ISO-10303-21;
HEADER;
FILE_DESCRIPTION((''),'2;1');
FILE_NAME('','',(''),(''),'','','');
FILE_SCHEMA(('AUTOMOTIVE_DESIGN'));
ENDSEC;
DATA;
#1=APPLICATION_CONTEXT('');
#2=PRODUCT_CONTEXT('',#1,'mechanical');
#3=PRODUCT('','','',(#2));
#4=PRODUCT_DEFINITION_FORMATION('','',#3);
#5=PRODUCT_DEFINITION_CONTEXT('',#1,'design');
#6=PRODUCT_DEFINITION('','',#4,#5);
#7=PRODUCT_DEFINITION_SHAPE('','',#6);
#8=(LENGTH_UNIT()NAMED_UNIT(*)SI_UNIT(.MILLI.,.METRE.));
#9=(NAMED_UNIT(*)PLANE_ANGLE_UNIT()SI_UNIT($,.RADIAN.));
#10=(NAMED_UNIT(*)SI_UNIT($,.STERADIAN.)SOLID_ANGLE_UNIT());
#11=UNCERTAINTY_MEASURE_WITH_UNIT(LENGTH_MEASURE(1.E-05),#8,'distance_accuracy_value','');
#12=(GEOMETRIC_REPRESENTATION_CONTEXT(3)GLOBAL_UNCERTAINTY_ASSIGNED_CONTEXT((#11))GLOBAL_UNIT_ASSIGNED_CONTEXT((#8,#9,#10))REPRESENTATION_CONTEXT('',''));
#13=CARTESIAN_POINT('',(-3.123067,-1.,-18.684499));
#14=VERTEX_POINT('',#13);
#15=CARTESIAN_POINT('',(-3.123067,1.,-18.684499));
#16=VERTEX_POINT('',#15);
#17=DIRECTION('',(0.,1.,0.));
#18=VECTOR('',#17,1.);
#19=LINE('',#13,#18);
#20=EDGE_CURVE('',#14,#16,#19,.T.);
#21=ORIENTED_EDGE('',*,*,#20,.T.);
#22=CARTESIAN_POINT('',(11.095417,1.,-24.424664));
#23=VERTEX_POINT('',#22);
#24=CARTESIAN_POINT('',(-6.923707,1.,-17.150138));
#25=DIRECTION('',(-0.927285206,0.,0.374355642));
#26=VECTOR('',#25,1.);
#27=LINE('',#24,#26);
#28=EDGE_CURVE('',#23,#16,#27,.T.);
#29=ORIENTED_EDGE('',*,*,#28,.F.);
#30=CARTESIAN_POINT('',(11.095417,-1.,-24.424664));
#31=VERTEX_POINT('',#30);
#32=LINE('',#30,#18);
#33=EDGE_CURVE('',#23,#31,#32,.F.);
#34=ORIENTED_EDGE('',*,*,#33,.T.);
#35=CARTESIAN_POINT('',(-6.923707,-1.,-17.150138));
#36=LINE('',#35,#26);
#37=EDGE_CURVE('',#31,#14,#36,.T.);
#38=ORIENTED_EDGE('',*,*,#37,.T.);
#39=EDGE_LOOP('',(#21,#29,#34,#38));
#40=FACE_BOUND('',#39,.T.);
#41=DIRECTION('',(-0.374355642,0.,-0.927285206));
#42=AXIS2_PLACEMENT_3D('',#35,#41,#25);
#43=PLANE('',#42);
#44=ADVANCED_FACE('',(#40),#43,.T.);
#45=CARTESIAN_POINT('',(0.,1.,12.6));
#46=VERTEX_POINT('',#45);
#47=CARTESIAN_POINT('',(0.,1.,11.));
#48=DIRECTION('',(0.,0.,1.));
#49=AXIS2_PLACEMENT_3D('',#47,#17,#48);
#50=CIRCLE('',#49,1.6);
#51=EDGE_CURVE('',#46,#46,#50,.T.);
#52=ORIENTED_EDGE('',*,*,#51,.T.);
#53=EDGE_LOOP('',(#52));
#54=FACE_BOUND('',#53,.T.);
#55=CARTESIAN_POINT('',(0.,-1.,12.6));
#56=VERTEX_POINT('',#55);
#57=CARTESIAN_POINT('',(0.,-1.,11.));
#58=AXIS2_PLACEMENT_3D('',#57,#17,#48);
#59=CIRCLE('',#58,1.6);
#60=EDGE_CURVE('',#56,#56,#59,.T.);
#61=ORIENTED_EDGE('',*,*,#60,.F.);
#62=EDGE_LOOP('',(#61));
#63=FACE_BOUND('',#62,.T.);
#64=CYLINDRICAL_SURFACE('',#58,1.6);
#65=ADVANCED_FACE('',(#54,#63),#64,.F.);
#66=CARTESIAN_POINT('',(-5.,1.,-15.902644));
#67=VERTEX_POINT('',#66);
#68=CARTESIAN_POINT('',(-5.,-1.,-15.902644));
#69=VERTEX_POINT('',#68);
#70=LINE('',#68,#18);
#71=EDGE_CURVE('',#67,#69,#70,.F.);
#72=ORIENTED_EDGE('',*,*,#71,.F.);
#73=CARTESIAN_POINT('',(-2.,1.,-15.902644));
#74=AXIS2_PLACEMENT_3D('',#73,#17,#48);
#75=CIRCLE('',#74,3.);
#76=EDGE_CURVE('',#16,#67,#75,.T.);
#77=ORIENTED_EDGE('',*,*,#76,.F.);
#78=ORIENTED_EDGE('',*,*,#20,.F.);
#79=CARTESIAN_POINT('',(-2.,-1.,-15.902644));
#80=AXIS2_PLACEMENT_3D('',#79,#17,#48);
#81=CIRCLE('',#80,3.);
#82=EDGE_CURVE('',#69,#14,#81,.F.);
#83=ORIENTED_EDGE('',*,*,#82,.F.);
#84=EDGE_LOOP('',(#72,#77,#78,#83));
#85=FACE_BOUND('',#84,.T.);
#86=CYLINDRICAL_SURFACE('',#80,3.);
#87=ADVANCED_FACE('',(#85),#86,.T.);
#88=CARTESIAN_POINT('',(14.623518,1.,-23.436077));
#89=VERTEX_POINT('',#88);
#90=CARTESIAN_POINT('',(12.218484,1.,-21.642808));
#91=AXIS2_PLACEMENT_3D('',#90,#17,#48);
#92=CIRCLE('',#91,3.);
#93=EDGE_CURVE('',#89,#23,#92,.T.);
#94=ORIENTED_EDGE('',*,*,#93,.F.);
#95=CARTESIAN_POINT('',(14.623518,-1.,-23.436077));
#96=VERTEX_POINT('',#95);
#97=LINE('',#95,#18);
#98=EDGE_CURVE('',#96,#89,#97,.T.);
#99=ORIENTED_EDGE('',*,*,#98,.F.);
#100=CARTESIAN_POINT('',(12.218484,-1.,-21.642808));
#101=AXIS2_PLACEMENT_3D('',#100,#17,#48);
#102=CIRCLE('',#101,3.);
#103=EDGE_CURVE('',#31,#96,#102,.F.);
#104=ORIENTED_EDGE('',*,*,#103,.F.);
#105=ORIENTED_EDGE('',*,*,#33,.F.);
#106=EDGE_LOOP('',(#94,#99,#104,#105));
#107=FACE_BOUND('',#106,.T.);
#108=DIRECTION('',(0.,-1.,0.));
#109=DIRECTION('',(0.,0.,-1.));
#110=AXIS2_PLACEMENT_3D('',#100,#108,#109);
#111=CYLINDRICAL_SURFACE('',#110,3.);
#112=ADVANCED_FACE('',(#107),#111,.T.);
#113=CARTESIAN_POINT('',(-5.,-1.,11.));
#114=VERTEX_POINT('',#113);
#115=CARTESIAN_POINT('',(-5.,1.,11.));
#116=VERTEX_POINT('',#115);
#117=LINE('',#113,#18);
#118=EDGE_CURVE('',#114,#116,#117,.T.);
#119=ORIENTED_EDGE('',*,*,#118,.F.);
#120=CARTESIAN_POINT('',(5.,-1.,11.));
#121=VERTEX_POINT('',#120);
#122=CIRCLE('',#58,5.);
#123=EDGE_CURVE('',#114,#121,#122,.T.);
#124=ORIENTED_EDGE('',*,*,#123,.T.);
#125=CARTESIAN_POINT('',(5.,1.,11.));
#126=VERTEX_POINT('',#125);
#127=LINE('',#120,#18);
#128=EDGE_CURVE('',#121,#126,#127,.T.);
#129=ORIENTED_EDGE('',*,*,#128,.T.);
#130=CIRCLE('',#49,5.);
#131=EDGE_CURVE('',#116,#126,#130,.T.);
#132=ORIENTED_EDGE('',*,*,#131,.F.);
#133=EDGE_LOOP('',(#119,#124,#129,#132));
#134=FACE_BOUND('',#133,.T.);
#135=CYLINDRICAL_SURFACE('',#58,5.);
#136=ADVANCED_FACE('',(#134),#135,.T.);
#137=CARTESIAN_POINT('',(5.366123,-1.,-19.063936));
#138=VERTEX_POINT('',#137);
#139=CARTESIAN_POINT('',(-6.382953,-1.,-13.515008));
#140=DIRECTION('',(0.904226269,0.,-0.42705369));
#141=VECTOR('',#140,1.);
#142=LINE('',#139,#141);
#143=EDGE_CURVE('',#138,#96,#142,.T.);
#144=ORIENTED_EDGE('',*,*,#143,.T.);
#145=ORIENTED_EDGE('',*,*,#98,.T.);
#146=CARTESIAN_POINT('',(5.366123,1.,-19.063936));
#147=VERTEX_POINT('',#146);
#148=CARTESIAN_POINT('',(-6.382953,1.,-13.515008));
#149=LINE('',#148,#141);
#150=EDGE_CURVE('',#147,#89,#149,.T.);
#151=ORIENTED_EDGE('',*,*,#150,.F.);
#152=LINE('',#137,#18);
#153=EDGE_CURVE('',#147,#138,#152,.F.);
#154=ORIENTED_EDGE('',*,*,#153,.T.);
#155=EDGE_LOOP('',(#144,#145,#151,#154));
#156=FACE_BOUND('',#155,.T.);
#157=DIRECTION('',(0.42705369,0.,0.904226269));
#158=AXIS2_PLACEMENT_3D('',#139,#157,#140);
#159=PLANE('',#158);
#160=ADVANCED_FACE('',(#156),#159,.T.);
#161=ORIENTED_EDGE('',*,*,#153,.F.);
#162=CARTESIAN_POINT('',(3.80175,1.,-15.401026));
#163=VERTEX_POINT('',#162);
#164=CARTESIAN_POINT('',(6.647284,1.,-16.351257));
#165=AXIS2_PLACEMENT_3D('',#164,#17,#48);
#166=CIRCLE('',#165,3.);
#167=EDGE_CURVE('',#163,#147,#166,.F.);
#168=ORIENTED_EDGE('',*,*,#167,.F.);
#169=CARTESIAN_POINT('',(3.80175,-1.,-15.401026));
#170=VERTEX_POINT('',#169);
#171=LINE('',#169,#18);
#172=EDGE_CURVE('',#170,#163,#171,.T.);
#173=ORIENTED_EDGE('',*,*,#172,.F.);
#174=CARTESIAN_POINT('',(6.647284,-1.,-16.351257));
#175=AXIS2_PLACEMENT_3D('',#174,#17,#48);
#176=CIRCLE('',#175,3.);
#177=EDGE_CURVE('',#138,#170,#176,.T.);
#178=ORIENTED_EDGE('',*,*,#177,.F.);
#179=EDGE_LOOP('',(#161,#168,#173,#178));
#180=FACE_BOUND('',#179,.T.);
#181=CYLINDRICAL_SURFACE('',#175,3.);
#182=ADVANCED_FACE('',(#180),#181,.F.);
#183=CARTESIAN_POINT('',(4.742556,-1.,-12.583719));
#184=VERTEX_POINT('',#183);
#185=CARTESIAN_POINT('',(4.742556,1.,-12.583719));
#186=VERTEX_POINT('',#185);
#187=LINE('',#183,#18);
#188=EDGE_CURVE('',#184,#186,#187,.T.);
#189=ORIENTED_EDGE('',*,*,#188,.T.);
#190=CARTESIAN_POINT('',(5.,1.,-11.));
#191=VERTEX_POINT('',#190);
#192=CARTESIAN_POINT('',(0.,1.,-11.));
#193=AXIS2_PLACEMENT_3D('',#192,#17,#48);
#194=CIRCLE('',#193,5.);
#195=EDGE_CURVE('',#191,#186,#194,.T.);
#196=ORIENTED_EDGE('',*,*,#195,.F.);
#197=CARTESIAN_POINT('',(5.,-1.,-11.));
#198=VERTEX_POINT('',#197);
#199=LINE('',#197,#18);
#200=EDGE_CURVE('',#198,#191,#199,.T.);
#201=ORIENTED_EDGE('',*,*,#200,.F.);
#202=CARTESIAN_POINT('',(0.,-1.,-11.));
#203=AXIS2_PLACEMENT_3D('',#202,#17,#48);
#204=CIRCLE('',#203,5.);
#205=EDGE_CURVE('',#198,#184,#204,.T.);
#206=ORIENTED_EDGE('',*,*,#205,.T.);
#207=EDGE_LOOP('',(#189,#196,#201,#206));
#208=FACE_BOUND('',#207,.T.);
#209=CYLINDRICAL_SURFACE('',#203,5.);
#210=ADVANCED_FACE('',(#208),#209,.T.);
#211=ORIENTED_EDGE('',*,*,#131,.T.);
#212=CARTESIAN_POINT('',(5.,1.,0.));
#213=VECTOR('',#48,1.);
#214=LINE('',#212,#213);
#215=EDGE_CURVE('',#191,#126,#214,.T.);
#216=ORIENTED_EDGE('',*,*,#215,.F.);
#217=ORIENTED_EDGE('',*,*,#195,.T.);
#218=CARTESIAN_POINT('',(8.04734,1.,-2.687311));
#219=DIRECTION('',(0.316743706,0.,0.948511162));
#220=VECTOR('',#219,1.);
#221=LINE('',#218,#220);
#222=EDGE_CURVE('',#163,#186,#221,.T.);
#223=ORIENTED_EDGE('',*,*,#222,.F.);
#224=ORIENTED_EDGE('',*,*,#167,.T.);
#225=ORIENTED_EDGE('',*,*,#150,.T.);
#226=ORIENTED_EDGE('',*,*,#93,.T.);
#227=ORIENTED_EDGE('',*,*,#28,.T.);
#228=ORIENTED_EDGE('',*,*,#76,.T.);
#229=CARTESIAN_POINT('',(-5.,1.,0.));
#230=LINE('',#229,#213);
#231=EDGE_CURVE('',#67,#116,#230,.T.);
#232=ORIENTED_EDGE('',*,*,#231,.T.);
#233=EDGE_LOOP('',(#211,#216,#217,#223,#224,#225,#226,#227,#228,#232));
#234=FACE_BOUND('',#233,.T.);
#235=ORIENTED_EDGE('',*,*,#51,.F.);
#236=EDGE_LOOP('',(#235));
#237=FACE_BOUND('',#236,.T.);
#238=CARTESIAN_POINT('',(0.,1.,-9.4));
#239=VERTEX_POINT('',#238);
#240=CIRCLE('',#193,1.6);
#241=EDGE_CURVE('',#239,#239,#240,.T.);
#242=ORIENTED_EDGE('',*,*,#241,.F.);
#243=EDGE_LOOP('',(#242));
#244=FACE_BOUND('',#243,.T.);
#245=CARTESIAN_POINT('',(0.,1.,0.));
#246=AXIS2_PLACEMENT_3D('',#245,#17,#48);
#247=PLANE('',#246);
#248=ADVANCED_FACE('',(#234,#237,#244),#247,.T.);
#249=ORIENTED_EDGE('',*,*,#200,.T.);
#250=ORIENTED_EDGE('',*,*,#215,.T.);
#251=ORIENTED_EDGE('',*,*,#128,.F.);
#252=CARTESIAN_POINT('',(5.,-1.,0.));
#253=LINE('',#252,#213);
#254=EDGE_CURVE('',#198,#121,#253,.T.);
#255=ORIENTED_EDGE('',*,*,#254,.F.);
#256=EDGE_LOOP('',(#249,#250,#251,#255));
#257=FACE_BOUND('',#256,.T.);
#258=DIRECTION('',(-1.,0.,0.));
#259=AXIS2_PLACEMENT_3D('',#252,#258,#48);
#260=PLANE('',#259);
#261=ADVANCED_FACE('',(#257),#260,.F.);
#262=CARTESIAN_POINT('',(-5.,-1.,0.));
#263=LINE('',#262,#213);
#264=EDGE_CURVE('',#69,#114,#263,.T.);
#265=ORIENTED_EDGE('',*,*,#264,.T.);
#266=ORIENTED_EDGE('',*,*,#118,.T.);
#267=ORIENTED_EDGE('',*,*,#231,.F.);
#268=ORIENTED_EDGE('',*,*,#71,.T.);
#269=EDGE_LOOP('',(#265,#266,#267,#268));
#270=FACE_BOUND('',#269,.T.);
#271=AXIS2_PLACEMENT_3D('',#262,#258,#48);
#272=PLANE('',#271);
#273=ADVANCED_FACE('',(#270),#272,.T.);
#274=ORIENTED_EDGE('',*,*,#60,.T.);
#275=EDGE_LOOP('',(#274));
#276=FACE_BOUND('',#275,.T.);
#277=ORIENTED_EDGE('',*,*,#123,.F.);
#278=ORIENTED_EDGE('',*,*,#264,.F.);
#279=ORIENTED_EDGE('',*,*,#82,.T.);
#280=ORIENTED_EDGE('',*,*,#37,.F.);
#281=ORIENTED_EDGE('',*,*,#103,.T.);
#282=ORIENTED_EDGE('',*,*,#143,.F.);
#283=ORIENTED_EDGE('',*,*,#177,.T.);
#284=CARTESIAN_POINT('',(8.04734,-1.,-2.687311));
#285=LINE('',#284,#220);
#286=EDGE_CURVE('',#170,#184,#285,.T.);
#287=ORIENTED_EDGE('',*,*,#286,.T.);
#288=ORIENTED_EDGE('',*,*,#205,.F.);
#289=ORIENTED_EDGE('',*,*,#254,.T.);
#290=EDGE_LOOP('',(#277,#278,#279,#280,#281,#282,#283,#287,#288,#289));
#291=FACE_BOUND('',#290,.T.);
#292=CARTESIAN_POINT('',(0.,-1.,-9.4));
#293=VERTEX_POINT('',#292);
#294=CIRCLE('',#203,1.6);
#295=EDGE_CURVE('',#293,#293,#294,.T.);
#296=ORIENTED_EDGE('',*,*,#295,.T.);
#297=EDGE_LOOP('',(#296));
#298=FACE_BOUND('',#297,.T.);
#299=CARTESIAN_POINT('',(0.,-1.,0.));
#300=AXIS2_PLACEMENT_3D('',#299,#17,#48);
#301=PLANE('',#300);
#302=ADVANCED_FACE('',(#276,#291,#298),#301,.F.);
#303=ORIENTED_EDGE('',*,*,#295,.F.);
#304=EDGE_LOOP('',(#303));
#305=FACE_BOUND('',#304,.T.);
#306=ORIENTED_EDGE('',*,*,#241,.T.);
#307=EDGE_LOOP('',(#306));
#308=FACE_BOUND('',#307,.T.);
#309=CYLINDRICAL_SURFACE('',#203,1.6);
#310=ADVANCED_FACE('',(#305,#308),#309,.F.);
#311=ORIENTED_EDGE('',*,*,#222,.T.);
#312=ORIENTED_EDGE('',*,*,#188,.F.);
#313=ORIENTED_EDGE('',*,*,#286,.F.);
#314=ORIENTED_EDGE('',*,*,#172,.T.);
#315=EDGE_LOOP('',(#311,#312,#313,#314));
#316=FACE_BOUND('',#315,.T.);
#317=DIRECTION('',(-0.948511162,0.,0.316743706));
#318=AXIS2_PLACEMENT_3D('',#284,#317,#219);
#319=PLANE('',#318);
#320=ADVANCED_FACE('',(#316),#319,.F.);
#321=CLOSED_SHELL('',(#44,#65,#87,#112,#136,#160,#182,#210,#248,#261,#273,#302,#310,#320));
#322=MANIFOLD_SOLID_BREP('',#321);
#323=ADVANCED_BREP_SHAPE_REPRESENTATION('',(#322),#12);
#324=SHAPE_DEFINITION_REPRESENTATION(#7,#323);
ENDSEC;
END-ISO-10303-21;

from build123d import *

# Parameters (mm, degrees)
BOSS_EXTRUDE1_DEPTH      = 1
BOSS_EXTRUDE1_DEPTH_BACK = 1
SKETCH1_R                = 1.6
BOSS_EXTRUDE4_START      = -2
BOSS_EXTRUDE4_DEPTH      = 2
FILLET1_R                = 3


with BuildPart() as part:
    # Sketch1 → Boss-Extrude1 (new, two sides: drawn at the far end of the back side and taken through both)
    with BuildSketch(Plane(origin=(0, 0, 0), x_dir=(1, 0, 0), z_dir=(0, 1, 0)).offset(-BOSS_EXTRUDE1_DEPTH_BACK)):
        with BuildLine():
            ThreePointArc((5, 11), (0, 16), (-5, 11))
            Line((-5, 11), (-5, -11))
            ThreePointArc((-5, -11), (0, -16), (5, -11))
            Line((5, -11), (5, 11))
        make_face()
        with Locations(Location((0, 11, 0), (0, 0, 270))):
            Circle(SKETCH1_R, mode=Mode.SUBTRACT)
        with Locations(Location((0, -11, 0), (0, 0, 270))):
            Circle(SKETCH1_R, mode=Mode.SUBTRACT)
    extrude(amount=BOSS_EXTRUDE1_DEPTH + BOSS_EXTRUDE1_DEPTH_BACK)

    # Sketch4 → Boss-Extrude4 (add)
    with BuildSketch(Plane(origin=(0, 1, 0), x_dir=(1, 0, 0), z_dir=(0, 1, 0)).offset(BOSS_EXTRUDE4_START)):
        with BuildLine():
            Line((2.958312472, 17.926759894), (-2.135268449, 15.521131346))
            ThreePointArc((-2.135268449, 15.521131346), (1.963819075, 15.59819689), (4.742555811, 12.58371853))
            Line((4.742555811, 12.58371853), (2.958312472, 17.926759894))
        make_face()
        with BuildLine():
            ThreePointArc((-5, 11), (-4.223525911, 13.676159352), (-2.135268449, 15.521131346))
            Line((-2.135268449, 15.521131346), (2.958312472, 17.926759894))
            Line((2.958312472, 17.926759894), (14.623518216, 23.436076894))
            Line((14.623518216, 23.436076894), (13.666416412, 25.462605676))
            Line((13.666416412, 25.462605676), (-5, 17.926759894))
            Line((-5, 17.926759894), (-5, 11))
        make_face()
    extrude(amount=BOSS_EXTRUDE4_DEPTH)

    # Fillet1
    # the kernel refuses this fillet: 3 mm, written as the material it adds along each edge
    with BuildSketch(Plane(origin=(2.958312472, -1, -17.926759894), x_dir=(0.9042262692177064, 0, -0.42705368989932413), z_dir=(0, 1, 0))) as fillet1_piece_1:
        with BuildLine():
            CenterArc((FILLET1_R * 0.887613530768, -FILLET1_R), FILLET1_R, 90, 83.185387179)
            Line((-FILLET1_R * 0.105321747078, -FILLET1_R * 0.881342787793), (0, 0))
            Line((0, 0), (FILLET1_R * 0.887613530768, 0))
        make_face()
    extrude(amount=2)
    # the kernel refuses this fillet: 3 mm, written as the material it takes off along each edge
    with BuildSketch(Plane(origin=(13.666416412, -7.931521676, -25.462605676), x_dir=(0.42705368989932463, 0, 0.904226269217706), z_dir=(0, 1, 0))) as fillet1_2_piece_1:
        with BuildLine():
            CenterArc((2.835616342, -2.940516757), FILLET1_R, 101.428639538, 75.275128979)
            Line((-0.159420459, -2.768021668), (0, 0))
            Line((0, 0), (2.241174417, 0))
        make_face()
    extrude(amount=15.863043352, mode=Mode.SUBTRACT)
    with BuildSketch(Plane(origin=(-5, -6.060290677, -17.926759894), x_dir=(0, 0, 1), z_dir=(0, 1, 0))) as fillet1_2_piece_2:
        with BuildLine():
            CenterArc((FILLET1_R * 0.674705423588, FILLET1_R), FILLET1_R, 201.984493206, 68.015506794)
            Line((-FILLET1_R * 0.252579782273, FILLET1_R * 0.625644357607), (0, 0))
            Line((0, 0), (FILLET1_R * 0.674705423588, 0))
        make_face()
    extrude(amount=12.120581354, mode=Mode.SUBTRACT)


solid = part.part
